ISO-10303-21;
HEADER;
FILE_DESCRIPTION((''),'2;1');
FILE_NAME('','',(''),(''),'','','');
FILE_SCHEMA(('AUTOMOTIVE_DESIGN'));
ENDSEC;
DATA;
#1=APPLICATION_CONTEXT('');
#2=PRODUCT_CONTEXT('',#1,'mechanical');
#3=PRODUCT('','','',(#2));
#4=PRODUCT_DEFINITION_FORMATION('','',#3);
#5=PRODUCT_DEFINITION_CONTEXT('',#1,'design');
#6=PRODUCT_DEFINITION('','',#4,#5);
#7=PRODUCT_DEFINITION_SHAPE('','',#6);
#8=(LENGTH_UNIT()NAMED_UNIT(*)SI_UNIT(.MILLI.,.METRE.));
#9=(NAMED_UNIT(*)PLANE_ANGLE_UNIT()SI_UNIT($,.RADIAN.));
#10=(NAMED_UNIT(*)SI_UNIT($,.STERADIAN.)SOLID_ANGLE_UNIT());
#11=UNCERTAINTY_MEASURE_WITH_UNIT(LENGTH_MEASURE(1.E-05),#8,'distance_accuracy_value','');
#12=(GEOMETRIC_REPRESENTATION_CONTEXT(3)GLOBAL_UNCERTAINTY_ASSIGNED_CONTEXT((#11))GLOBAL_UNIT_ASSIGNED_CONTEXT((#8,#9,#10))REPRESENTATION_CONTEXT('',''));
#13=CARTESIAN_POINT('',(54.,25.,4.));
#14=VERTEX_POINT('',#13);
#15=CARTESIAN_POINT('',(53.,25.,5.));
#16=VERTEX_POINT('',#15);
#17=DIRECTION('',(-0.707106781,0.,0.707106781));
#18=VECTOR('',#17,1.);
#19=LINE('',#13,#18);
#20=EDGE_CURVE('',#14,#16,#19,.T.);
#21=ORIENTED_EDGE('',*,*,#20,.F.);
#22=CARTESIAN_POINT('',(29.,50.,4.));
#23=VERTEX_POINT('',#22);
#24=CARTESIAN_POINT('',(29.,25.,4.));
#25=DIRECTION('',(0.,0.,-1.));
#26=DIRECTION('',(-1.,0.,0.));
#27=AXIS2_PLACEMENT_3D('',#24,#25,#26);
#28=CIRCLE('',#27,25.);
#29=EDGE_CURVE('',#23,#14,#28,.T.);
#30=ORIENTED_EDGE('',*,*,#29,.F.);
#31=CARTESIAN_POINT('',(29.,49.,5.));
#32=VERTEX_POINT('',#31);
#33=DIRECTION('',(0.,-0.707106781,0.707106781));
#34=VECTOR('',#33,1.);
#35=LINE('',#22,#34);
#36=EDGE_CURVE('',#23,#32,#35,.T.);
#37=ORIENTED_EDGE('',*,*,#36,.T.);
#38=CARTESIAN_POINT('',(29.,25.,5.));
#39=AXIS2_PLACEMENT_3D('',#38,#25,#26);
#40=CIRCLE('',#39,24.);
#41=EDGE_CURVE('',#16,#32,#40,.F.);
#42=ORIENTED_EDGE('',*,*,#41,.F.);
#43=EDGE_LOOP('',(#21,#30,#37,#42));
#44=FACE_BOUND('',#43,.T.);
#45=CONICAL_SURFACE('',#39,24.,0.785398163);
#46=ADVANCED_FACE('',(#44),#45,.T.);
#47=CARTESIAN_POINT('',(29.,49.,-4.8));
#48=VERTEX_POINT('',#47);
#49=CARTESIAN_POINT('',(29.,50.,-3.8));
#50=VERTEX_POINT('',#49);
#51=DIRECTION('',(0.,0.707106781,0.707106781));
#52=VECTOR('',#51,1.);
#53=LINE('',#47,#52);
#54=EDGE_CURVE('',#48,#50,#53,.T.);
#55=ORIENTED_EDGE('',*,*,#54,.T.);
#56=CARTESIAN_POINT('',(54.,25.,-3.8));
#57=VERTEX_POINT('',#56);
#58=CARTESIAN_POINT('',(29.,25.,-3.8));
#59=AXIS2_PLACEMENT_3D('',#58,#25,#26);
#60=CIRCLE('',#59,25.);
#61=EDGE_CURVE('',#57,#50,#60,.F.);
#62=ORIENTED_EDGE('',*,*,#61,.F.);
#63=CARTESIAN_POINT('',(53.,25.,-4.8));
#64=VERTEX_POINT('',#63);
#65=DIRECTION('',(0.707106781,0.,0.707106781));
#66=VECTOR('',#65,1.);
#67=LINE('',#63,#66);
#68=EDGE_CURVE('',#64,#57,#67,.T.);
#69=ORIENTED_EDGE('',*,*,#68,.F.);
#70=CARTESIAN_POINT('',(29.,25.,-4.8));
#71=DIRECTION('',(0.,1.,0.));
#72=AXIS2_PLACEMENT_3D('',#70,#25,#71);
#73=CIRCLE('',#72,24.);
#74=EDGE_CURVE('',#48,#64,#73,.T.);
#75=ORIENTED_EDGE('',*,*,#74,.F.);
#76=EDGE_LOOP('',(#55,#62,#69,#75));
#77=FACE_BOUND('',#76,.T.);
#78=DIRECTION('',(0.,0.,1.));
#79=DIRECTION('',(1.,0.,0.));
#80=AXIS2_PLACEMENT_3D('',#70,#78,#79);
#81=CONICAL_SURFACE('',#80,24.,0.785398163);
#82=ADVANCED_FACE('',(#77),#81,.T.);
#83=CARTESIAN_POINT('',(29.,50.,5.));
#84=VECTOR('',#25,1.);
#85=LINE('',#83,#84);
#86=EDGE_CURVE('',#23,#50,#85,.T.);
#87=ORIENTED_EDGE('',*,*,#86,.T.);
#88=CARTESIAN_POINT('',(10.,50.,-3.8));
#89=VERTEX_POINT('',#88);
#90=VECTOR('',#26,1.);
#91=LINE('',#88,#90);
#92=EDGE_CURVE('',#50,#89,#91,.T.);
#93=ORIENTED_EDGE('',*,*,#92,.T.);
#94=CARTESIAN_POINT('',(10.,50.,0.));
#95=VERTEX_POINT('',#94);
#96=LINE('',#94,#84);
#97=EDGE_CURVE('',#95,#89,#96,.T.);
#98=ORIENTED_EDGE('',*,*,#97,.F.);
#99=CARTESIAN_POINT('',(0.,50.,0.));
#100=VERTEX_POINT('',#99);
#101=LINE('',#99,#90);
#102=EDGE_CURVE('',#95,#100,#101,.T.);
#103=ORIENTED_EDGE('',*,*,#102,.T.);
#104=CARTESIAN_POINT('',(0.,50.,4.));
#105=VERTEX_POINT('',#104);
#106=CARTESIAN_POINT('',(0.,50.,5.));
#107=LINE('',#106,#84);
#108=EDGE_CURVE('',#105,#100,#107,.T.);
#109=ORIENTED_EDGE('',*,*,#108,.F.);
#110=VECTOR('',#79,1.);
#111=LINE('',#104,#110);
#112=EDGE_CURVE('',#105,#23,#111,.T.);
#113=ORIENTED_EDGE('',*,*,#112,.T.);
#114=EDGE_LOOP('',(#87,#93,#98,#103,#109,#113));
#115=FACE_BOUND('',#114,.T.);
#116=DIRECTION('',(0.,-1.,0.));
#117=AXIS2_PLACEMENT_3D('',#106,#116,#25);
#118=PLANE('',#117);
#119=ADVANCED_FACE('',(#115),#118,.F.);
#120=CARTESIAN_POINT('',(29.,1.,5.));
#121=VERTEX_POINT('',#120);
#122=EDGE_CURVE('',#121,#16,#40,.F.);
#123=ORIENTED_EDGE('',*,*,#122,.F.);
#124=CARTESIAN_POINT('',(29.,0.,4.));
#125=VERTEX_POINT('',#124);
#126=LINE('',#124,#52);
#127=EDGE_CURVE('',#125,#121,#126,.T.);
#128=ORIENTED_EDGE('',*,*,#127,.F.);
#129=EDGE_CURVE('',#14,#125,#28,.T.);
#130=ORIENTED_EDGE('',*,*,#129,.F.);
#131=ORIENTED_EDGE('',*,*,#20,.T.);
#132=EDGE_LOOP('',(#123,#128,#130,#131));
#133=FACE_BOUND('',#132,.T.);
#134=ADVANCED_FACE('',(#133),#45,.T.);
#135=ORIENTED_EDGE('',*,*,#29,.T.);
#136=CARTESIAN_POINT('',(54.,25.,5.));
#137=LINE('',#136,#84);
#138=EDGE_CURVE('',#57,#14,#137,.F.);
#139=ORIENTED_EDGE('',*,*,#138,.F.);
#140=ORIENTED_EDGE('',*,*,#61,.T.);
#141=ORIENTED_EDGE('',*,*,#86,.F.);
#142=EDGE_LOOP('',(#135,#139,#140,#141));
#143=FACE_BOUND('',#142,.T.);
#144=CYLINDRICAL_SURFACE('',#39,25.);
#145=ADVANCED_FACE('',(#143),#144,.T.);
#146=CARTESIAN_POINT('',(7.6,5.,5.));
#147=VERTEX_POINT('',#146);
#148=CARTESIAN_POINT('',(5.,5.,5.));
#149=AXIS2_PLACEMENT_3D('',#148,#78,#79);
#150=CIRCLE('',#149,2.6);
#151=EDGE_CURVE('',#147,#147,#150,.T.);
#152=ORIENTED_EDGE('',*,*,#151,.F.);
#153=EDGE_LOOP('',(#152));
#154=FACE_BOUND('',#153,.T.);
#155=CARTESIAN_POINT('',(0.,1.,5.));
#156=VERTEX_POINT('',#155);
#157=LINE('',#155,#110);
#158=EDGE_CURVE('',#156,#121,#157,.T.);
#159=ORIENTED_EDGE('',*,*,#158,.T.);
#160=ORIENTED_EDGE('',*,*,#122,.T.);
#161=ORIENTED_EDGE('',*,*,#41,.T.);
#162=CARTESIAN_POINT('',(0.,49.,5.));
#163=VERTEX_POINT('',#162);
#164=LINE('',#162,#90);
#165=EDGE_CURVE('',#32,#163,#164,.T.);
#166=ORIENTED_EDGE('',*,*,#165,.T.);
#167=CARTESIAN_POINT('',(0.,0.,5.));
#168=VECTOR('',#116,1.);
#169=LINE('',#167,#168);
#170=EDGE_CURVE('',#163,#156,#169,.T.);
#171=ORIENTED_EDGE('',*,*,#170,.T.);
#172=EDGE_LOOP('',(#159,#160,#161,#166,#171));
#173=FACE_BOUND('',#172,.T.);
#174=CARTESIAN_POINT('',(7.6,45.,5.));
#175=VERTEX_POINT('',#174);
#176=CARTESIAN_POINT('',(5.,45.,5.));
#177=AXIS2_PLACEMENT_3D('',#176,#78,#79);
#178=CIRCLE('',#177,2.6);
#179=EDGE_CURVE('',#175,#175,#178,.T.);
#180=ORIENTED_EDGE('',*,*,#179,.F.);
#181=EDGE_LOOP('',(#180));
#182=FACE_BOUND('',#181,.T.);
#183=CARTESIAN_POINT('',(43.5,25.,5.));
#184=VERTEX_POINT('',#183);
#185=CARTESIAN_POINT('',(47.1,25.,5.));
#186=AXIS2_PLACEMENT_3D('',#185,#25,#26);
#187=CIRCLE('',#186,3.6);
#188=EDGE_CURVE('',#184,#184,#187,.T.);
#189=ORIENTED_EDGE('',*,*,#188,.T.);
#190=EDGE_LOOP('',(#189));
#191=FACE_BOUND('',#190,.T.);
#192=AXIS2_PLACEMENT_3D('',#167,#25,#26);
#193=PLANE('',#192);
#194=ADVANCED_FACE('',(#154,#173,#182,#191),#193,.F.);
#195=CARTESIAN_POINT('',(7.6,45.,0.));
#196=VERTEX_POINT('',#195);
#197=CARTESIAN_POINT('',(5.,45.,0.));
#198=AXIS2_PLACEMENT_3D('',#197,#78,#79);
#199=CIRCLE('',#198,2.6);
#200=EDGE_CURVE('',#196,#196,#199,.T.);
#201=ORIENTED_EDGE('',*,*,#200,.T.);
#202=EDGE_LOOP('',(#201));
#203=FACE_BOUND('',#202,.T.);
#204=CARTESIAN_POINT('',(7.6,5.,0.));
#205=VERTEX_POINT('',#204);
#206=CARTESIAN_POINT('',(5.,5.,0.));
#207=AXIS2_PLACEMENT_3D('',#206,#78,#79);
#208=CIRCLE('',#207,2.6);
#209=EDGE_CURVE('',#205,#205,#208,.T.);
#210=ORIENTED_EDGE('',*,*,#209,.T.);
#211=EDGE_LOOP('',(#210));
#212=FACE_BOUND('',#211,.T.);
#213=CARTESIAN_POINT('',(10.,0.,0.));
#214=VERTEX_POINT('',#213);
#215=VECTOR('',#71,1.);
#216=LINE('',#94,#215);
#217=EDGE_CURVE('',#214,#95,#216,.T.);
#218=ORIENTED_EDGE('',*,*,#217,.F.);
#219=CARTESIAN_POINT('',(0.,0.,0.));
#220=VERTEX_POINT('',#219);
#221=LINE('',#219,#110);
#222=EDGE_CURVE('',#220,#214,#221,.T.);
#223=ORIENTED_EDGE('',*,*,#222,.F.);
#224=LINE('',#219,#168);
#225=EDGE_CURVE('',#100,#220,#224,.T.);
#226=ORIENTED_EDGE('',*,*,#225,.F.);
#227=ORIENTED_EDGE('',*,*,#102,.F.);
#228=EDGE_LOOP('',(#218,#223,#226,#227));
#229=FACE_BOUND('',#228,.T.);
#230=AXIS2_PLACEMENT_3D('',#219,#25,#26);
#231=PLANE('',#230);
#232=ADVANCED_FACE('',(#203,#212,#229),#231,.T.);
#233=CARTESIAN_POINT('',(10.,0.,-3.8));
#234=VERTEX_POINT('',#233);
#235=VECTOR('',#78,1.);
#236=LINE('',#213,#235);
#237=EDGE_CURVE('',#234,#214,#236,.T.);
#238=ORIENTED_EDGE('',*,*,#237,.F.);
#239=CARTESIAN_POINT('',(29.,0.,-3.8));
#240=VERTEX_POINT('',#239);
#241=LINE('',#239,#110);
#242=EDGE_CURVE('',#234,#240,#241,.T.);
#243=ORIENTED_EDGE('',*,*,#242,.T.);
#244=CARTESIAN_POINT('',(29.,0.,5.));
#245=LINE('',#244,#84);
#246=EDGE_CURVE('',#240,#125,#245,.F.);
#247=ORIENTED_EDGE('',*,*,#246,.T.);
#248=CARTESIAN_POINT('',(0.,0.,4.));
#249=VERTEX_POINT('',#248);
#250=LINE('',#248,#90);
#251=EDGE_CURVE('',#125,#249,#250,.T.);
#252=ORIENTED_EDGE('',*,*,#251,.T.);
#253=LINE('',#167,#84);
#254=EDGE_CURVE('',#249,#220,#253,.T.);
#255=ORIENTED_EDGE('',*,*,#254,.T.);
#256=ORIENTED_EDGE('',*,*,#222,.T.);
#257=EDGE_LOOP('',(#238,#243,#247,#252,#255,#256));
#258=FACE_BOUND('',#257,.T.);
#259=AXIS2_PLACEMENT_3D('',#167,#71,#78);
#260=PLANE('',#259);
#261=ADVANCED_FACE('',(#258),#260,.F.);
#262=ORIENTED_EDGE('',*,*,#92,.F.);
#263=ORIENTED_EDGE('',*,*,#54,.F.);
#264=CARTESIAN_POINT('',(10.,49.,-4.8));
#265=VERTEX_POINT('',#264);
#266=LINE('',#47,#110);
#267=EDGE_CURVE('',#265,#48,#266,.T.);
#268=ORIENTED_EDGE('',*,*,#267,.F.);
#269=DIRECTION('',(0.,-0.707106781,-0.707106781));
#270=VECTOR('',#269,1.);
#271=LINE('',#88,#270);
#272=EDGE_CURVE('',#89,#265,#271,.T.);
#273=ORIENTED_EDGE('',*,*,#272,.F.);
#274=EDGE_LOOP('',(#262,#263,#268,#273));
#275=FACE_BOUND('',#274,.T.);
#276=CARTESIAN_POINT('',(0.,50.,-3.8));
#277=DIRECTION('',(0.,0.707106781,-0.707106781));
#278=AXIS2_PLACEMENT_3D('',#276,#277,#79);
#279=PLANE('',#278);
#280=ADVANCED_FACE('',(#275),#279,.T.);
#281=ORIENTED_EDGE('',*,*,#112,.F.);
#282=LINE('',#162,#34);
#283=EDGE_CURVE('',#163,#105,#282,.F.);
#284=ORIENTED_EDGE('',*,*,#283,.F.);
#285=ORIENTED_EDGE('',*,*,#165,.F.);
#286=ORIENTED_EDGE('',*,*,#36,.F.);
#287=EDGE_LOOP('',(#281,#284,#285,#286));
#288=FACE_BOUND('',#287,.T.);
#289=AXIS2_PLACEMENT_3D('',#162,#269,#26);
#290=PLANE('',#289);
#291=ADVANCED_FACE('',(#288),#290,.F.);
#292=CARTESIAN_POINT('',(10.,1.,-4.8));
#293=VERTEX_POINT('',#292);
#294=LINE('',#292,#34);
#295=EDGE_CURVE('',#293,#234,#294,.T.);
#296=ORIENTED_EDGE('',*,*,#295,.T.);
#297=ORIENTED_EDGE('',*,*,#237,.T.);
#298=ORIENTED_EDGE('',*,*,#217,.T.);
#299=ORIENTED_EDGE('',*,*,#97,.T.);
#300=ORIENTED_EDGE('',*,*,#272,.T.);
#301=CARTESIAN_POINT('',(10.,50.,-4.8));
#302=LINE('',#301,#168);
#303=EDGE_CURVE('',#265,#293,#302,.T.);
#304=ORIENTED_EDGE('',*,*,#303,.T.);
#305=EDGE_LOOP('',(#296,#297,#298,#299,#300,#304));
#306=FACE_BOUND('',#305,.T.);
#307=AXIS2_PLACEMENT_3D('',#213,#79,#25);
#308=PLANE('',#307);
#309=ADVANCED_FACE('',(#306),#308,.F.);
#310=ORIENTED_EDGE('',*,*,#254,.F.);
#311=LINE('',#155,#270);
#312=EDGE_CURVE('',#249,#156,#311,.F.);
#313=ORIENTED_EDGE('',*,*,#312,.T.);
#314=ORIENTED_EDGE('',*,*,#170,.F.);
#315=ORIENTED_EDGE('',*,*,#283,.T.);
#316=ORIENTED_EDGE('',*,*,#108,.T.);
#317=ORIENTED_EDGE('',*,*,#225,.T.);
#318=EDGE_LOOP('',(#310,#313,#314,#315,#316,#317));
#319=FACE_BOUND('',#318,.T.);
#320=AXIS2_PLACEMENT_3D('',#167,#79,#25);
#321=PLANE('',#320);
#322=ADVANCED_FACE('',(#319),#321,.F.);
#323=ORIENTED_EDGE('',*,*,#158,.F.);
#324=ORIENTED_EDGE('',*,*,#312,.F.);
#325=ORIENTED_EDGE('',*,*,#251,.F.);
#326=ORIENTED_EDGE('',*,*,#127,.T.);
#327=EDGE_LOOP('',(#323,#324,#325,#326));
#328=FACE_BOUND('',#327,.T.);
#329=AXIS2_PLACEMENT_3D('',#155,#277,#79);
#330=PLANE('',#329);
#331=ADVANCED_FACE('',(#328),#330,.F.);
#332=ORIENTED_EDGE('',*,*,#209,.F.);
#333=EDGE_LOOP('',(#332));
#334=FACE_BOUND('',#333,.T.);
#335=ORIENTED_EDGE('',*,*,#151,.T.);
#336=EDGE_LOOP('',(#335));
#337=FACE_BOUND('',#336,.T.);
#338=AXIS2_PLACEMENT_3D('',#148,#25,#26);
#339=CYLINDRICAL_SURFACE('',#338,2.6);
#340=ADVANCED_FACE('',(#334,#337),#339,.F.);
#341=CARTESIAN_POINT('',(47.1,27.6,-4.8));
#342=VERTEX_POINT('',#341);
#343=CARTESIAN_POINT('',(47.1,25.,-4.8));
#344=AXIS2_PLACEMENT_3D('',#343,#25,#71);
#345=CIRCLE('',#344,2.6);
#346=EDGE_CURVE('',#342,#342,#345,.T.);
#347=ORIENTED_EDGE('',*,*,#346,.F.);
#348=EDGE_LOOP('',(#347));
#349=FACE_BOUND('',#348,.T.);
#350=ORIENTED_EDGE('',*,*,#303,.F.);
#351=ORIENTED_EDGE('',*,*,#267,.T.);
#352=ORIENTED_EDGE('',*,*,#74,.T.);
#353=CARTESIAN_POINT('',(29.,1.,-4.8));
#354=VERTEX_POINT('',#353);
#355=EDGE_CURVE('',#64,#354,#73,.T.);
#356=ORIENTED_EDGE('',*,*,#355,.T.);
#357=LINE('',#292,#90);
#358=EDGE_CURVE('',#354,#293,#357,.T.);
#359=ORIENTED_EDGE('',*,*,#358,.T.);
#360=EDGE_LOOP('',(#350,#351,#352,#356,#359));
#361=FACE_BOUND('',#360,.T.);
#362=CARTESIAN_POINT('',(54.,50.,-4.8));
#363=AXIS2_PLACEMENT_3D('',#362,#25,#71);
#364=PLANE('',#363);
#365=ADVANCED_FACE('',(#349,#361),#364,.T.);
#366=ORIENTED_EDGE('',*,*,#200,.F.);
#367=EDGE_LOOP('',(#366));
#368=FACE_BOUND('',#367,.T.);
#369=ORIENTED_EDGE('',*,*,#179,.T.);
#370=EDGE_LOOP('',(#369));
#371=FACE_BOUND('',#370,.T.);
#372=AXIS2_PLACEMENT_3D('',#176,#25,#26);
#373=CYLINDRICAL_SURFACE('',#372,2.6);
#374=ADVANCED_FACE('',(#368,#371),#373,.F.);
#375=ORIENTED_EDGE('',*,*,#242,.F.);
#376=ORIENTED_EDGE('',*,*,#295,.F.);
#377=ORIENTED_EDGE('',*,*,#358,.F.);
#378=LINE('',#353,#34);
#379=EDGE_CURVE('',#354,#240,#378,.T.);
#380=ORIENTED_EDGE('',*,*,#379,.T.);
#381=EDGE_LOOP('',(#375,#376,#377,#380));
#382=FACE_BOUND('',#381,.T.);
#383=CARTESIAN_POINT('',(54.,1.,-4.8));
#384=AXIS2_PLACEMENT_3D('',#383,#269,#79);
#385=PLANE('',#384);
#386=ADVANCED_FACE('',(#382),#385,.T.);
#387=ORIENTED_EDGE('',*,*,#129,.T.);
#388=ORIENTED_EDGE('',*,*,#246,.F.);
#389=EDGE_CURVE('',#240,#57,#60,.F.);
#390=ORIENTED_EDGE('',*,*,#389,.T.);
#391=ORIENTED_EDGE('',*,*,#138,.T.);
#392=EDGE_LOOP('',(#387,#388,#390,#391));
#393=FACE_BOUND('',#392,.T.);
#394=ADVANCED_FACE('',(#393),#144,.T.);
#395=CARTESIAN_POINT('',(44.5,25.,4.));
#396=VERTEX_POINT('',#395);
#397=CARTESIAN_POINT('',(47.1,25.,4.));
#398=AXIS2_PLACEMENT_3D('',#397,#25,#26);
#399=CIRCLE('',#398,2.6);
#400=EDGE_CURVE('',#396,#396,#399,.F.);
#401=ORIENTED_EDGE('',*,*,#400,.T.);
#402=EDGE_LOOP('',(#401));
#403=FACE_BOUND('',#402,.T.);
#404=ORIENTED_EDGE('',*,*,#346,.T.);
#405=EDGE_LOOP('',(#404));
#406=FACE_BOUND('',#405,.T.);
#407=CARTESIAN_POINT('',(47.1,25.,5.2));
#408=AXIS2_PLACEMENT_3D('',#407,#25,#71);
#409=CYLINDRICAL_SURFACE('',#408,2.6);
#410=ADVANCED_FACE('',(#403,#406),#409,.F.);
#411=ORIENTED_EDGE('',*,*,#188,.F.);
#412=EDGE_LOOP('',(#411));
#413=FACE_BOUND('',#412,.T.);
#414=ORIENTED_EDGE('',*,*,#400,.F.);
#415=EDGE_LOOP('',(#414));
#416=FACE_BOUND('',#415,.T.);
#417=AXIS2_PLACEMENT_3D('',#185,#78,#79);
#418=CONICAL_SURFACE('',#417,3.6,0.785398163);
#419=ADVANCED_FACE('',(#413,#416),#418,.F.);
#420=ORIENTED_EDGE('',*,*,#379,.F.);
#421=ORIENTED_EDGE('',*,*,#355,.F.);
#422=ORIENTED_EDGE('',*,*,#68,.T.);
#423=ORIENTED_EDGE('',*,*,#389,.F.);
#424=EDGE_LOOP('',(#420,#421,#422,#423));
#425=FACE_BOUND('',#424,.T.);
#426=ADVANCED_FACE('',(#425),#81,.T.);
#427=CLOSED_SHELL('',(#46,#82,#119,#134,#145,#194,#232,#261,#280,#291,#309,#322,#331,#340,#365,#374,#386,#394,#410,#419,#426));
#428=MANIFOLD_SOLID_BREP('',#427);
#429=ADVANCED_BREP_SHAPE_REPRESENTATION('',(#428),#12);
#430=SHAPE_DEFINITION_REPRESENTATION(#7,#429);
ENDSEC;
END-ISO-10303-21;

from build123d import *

# Parameters (mm, degrees)
SKETCH1_W           = 54
SKETCH1_H           = 50
SKETCH1_R           = 2.6
BOSS_EXTRUDE1_DEPTH = 5
SKETCH2_W           = 4.8
SKETCH2_H           = 50
BOSS_EXTRUDE2_DEPTH = 44
SKETCH3_R           = 2.6
CUT_EXTRUDE1_DEPTH  = 10
FILLET1_R           = 25
CHAMFER1_SIZE       = 1
CHAMFER2_SIZE       = 1
CHAMFER3_SIZE       = 1


with BuildPart() as part:
    # Sketch1 → Boss-Extrude1 (new body)
    with BuildSketch(Plane.XY):
        with Locations((27, 25)):
            Rectangle(SKETCH1_W, SKETCH1_H)
        with Locations((5, 45)):
            Circle(SKETCH1_R, mode=Mode.SUBTRACT)
        with Locations((5, 5)):
            Circle(SKETCH1_R, mode=Mode.SUBTRACT)
    extrude(amount=BOSS_EXTRUDE1_DEPTH)

    # Sketch2 → Boss-Extrude2 (add)
    with BuildSketch(Plane.ZY.offset(-10)):
        with Locations((-2.4, 25)):
            Rectangle(SKETCH2_W, SKETCH2_H)
    extrude(amount=-BOSS_EXTRUDE2_DEPTH)

    # Sketch3 → Cut-Extrude1 (cut)
    with BuildSketch(Plane(origin=(0, 0, -4.8), x_dir=(-1, 0, 0), z_dir=(0, 0, -1))):
        with Locations(Location((-47.1, 25, 0), (0, 0, 90))):
            Circle(SKETCH3_R)
    extrude(amount=-CUT_EXTRUDE1_DEPTH, mode=Mode.SUBTRACT)

    # Fillet1
    fillet1_edges = [part.edges().sort_by_distance(p)[0] for p in [
        (54, 0, 0.1),
        (54, 50, 0.1),
    ]]
    fillet(fillet1_edges, radius=FILLET1_R - 0.0001)  # a hair under: the kernel refuses the full size

    # Chamfer1
    chamfer1_edges = [part.edges().sort_by_distance(p)[0] for p in [
        (47.1, 22.4, 5),
    ]]
    chamfer(chamfer1_edges, length=CHAMFER1_SIZE)

    # Chamfer2
    chamfer2_edges = [part.edges().sort_by_distance(p)[0] for p in [
        (14.50005, 50, 5),
        (46.677698819, 42.677698819, 5),
        (46.677698819, 7.322301181, 5),
        (14.50005, 0, 5),
    ]]
    chamfer(chamfer2_edges, length=CHAMFER2_SIZE)

    # Chamfer3
    chamfer3_edges = [part.edges().sort_by_distance(p)[0] for p in [
        (19.50005, 50, -4.8),
        (19.50005, 0, -4.8),
        (46.677698819, 42.677698819, -4.8),
        (46.677698819, 7.322301181, -4.8),
    ]]
    chamfer(chamfer3_edges, length=CHAMFER3_SIZE)


solid = part.part
